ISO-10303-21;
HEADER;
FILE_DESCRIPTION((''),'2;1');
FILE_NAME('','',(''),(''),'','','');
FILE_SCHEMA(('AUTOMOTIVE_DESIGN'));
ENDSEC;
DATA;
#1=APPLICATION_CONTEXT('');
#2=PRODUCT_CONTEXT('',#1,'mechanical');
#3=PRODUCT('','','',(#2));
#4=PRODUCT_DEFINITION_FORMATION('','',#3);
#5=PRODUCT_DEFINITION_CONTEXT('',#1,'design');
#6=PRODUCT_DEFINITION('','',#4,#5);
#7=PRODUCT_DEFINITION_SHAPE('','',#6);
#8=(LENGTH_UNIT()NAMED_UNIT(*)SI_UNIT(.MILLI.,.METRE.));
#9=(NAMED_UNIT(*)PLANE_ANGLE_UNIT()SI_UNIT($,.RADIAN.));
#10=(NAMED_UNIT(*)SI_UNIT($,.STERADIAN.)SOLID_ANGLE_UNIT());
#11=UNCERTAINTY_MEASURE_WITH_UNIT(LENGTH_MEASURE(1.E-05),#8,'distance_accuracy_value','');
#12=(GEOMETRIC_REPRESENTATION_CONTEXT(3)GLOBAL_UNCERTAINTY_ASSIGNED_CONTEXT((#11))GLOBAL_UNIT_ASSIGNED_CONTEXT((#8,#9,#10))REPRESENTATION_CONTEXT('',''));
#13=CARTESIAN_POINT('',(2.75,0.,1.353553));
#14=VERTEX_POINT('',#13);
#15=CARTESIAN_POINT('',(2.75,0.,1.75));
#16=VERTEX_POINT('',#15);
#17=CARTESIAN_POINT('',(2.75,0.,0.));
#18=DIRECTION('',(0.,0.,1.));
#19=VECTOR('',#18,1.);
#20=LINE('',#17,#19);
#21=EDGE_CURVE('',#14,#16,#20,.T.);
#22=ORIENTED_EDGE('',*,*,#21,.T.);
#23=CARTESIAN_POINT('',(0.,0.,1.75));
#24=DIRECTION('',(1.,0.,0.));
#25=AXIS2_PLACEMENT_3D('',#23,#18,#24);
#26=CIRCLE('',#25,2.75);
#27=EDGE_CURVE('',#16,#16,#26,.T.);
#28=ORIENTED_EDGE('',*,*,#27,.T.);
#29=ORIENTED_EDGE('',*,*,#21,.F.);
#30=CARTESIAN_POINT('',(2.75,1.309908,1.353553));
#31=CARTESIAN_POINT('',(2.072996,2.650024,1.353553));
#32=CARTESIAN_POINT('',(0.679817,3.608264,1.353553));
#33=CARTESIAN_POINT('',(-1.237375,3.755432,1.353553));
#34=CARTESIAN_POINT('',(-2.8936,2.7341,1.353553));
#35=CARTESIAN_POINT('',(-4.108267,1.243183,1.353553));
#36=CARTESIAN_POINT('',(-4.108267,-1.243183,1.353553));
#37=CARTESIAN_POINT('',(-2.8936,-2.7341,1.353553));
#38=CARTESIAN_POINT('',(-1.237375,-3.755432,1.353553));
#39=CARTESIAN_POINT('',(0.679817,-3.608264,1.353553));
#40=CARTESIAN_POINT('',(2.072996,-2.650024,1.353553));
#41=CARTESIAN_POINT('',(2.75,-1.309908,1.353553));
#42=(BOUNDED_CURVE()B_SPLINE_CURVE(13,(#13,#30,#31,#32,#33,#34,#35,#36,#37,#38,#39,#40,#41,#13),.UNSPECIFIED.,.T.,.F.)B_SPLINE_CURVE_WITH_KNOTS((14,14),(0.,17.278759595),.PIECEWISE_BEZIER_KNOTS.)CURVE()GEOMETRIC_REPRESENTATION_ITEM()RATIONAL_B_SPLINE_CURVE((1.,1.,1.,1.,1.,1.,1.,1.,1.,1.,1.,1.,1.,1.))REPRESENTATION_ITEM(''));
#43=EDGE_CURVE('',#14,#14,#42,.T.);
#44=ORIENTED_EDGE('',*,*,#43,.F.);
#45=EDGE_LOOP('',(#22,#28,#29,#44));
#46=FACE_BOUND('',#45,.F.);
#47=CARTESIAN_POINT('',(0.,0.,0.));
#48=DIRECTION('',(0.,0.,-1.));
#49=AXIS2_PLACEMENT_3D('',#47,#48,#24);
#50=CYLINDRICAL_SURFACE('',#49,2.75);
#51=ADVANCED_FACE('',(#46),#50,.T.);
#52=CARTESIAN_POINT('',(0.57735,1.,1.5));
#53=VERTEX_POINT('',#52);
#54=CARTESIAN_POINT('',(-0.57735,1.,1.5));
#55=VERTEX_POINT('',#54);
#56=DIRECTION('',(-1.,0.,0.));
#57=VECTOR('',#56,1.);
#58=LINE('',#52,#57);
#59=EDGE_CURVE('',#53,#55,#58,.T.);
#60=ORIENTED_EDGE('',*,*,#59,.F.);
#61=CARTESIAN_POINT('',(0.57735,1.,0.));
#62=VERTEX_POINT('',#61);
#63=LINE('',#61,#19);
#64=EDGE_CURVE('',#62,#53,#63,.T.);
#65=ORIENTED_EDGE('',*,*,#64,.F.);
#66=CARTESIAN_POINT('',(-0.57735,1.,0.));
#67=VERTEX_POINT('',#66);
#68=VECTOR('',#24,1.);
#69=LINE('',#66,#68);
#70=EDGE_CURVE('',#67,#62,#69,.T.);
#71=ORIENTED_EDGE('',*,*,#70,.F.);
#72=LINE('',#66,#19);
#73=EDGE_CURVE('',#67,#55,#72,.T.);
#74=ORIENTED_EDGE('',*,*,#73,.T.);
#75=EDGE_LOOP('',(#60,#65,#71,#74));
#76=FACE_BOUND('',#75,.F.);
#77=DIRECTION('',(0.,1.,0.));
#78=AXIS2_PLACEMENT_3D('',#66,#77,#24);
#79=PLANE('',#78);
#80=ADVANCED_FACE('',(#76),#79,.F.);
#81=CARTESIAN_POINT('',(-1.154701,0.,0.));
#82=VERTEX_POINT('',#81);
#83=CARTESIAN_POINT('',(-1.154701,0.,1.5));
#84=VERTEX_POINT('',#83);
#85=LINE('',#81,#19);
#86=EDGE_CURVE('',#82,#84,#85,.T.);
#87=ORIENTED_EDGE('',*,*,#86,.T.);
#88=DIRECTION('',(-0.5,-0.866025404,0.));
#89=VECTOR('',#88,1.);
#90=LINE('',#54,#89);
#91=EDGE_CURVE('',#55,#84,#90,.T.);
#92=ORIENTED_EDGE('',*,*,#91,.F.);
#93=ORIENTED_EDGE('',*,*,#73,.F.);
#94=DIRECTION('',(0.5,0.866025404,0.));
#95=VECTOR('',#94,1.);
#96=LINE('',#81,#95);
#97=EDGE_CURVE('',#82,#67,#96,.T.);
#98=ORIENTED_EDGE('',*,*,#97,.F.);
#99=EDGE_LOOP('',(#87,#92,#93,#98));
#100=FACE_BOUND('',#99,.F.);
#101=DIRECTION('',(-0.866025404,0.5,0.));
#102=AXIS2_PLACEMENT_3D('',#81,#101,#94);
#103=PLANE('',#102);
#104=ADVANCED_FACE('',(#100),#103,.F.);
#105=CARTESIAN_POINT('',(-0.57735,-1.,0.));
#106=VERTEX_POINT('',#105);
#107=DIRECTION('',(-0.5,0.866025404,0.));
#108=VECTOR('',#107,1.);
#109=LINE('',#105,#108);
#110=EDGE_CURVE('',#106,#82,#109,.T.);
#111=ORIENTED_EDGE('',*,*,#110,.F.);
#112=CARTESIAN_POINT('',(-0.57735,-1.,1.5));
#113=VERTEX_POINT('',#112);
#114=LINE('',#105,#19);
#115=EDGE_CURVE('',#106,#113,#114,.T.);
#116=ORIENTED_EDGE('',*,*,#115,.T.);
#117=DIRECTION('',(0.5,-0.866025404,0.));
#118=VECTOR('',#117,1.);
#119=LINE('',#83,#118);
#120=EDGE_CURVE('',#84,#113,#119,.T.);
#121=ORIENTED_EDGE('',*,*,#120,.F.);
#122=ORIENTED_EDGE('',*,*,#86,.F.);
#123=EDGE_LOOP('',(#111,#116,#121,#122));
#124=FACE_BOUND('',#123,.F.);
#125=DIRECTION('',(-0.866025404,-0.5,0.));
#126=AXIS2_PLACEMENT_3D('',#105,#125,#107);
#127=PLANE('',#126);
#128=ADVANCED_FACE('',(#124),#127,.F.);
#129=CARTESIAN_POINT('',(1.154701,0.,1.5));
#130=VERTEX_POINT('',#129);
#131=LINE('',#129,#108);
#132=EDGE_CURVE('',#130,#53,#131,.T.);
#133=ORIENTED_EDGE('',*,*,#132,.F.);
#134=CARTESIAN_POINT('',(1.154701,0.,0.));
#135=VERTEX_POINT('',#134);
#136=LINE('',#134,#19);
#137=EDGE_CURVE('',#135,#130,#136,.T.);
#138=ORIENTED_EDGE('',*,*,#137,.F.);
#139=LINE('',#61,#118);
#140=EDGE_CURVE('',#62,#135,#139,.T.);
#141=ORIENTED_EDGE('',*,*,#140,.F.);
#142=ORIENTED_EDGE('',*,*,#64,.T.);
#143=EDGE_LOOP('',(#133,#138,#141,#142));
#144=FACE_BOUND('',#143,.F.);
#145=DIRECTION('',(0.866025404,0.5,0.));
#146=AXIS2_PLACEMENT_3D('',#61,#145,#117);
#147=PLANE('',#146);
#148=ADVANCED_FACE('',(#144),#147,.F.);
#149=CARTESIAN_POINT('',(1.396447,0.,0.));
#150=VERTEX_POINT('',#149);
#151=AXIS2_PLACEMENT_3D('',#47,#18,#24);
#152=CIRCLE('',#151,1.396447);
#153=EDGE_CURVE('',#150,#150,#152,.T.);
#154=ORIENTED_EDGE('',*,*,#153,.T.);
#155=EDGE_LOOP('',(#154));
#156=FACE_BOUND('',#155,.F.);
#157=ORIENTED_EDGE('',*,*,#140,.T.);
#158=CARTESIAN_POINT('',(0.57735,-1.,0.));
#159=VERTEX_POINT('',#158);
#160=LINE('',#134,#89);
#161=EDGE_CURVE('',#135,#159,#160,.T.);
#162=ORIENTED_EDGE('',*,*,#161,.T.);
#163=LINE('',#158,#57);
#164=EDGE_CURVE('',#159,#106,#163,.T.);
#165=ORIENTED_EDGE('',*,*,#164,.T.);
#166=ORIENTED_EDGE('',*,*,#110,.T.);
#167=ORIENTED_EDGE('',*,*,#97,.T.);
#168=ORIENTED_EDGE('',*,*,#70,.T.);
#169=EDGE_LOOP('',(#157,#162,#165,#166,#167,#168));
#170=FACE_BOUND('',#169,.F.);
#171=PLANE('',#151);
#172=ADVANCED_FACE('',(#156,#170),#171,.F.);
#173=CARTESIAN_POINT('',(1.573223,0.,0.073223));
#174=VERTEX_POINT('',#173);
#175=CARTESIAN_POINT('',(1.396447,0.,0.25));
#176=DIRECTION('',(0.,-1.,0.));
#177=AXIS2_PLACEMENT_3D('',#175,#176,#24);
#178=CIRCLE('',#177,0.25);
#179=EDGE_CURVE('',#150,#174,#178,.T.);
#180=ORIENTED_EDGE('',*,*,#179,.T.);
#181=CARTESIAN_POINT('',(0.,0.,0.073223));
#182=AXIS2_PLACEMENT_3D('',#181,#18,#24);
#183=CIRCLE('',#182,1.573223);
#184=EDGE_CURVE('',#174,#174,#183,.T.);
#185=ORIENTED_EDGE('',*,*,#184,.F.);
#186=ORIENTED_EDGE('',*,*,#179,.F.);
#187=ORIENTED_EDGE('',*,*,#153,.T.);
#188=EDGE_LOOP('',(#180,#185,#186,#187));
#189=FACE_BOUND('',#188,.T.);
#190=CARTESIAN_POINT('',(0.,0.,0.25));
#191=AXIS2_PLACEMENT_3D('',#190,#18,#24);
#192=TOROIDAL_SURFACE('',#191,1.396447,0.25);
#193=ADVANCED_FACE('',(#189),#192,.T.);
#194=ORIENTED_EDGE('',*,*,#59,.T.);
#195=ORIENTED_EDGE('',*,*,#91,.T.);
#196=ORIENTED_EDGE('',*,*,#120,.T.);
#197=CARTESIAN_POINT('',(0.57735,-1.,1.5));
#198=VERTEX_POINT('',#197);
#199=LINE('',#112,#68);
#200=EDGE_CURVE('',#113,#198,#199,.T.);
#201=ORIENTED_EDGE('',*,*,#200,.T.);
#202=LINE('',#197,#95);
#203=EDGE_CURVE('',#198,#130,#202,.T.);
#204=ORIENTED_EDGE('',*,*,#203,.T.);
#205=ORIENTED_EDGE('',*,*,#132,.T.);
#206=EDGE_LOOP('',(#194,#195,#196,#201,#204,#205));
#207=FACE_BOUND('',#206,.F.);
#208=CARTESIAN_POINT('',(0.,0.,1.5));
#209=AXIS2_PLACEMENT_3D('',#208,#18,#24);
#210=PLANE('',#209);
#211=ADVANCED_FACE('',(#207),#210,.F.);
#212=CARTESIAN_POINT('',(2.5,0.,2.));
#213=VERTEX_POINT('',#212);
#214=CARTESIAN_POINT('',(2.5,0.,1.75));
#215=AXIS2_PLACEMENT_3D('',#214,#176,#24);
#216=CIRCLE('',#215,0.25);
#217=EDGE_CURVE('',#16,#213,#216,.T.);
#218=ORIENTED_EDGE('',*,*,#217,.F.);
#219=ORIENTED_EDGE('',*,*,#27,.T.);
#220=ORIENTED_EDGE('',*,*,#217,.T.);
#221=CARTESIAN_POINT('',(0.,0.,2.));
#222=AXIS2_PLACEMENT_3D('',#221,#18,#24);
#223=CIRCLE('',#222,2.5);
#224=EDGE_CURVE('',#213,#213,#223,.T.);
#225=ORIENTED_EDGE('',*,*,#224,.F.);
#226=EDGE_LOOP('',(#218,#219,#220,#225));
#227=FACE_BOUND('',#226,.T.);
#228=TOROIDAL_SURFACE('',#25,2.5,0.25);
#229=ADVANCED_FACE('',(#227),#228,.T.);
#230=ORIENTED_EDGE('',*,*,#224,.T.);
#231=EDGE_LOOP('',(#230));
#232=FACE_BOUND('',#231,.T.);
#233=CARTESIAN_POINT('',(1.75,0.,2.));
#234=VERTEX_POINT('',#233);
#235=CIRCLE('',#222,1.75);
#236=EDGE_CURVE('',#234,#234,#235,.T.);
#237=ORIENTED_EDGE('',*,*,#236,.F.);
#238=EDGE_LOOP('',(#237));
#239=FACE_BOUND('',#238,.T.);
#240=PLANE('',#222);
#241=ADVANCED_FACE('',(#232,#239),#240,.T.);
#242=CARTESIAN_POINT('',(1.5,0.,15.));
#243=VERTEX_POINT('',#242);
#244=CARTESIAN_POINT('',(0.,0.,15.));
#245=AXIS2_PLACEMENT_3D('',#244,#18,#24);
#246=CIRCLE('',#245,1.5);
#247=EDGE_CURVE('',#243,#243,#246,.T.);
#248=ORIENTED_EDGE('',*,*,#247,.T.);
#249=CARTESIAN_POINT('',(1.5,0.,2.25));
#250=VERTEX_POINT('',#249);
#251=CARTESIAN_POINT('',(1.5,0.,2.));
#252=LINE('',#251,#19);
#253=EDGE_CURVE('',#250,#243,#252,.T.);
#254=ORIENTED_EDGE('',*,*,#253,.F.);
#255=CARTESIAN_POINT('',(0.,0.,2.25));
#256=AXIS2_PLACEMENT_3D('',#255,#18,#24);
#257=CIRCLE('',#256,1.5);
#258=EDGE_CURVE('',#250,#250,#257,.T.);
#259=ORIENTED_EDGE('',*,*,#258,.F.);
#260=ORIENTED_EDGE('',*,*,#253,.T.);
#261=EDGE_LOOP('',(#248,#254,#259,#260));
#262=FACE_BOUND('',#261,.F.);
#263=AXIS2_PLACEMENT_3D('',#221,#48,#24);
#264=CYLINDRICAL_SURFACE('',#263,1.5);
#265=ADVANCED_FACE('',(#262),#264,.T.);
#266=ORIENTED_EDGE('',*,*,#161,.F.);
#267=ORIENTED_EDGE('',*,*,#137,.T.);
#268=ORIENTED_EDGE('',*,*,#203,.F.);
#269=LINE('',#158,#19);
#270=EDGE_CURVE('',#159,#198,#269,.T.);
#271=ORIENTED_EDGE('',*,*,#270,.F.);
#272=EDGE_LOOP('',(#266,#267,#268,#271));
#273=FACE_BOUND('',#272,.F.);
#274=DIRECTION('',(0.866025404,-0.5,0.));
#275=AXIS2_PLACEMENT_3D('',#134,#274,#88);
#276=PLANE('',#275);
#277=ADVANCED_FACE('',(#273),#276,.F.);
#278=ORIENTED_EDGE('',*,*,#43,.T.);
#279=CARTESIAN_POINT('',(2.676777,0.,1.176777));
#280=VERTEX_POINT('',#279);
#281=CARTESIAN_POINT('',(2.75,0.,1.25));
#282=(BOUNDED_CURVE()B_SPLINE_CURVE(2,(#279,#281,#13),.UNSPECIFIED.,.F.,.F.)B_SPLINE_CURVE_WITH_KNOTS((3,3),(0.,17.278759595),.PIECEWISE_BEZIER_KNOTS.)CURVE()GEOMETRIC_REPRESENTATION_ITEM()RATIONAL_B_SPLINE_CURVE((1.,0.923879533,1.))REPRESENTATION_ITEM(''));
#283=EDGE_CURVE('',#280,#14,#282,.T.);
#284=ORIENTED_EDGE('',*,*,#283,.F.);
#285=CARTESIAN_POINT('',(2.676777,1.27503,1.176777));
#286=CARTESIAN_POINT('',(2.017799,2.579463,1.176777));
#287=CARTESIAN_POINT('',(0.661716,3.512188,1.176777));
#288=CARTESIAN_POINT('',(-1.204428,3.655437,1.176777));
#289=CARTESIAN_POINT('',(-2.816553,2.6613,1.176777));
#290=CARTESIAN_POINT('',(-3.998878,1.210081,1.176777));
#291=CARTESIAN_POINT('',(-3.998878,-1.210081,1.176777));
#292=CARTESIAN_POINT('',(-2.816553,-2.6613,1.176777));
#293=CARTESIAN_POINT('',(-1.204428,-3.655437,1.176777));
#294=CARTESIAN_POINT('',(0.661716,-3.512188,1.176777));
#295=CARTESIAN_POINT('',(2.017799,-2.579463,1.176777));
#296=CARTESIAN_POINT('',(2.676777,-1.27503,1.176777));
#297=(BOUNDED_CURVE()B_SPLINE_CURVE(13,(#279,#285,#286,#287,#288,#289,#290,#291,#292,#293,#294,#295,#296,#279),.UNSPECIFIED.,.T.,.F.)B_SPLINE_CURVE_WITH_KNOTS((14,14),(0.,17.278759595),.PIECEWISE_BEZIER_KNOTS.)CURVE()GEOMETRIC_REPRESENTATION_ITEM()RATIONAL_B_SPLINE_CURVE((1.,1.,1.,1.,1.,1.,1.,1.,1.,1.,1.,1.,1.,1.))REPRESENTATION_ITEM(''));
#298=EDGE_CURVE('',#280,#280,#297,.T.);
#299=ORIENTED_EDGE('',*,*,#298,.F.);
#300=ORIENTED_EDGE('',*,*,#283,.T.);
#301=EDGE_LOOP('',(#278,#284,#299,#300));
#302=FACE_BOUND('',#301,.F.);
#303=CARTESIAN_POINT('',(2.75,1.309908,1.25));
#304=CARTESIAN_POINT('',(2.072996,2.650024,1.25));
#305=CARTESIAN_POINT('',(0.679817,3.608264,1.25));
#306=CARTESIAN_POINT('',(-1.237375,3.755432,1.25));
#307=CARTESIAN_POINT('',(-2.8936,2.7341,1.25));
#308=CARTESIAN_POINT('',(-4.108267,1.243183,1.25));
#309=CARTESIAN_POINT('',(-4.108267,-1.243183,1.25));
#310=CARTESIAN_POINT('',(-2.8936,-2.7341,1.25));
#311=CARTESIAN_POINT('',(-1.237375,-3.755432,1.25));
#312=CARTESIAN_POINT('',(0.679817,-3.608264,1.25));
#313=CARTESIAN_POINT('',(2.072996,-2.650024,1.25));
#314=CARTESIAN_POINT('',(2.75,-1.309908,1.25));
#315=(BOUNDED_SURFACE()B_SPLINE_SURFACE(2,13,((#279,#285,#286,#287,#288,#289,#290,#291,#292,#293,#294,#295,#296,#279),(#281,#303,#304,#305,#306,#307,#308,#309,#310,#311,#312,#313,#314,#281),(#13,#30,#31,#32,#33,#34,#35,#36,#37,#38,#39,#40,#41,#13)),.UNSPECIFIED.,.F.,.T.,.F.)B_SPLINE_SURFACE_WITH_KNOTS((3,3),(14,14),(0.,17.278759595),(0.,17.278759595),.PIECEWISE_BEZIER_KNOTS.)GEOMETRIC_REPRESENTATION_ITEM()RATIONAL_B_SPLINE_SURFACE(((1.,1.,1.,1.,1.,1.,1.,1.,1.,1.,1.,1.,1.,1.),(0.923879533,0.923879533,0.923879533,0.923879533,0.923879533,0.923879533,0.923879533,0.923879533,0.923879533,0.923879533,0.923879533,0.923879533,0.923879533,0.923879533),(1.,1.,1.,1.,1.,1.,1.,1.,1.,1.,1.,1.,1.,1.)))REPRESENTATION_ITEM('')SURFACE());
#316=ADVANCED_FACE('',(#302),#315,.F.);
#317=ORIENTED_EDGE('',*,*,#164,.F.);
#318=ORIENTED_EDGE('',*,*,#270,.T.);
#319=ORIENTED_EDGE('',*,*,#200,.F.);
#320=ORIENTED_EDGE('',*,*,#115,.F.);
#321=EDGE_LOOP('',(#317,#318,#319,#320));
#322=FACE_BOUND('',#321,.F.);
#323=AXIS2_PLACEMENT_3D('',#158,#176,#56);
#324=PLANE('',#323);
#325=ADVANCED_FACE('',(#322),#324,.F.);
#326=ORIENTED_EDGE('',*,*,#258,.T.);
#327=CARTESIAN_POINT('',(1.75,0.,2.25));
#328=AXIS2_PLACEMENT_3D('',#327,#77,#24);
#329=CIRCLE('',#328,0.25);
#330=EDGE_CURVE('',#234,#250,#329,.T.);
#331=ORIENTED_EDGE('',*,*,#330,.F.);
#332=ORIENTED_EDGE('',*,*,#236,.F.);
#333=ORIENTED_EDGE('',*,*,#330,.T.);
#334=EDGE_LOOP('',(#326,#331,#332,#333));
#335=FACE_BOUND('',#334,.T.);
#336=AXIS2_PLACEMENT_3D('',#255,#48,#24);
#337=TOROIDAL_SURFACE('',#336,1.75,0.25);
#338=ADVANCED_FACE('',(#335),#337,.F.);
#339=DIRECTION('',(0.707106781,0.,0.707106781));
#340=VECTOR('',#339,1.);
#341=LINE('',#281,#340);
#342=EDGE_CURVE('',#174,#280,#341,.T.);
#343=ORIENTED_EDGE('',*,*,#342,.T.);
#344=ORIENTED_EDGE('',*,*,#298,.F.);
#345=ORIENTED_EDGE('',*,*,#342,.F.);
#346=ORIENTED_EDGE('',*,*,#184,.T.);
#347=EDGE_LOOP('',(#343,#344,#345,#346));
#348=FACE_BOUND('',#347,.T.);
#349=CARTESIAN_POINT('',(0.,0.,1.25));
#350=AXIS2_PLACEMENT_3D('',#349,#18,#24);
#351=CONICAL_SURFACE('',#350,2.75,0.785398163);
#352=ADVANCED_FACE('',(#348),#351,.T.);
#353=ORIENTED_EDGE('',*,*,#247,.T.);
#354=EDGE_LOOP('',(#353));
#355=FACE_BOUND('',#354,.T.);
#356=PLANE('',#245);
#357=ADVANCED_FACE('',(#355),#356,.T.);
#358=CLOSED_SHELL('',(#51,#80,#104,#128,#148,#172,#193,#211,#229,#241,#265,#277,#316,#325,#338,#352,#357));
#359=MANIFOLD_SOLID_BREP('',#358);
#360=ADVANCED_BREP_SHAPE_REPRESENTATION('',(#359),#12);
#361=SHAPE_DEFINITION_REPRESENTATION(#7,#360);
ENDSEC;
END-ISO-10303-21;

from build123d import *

# Parameters (mm, degrees)
F1_R     = 2.75
F1_R_2   = 1.5
F2_DEPTH = 2
F3_START = 1.5
F3_DEPTH = 0.5
F4_START = 2
F4_DEPTH = 13
F5_SIZE2 = 1.25
F5_SIZE  = 1.25
F6_R     = 0.25


# Not quite as in the source:
# - a feature names something its author has since deleted; it is built from what else it names


with BuildPart() as f2:
    # F1 (on Top) → F2 (new body)
    with BuildSketch(Plane.XY):
        Circle(F1_R)
        Circle(F1_R_2, mode=Mode.SUBTRACT)
        Circle(F1_R_2)
        Polygon((-0.5773502692, -1), (-1.1547005384, 0), (-0.5773502692, 1), (0.5773502692, 1), (1.1547005384, 0), (0.5773502692, -1), align=None, mode=Mode.SUBTRACT)
    extrude(amount=F2_DEPTH)

    # F1 (on Top) → F3 (join)
    with BuildSketch(Plane.XY.offset(F3_START)):
        Polygon((-0.5773502692, 1), (-1.1547005384, 0), (-0.5773502692, -1), (0.5773502692, -1), (1.1547005384, 0), (0.5773502692, 1), align=None)
    extrude(amount=F3_DEPTH)

    # F1 (on Top) → F4 (join)
    with BuildSketch(Plane.XY.offset(F4_START)):
        Circle(F1_R_2)
        Polygon((-0.5773502692, -1), (-1.1547005384, 0), (-0.5773502692, 1), (0.5773502692, 1), (1.1547005384, 0), (0.5773502692, -1), align=None, mode=Mode.SUBTRACT)
        Polygon((-0.5773502692, 1), (-1.1547005384, 0), (-0.5773502692, -1), (0.5773502692, -1), (1.1547005384, 0), (0.5773502692, 1), align=None)
    extrude(amount=F4_DEPTH)

    # F5
    f5_edges = [f2.edges().sort_by_distance(p)[0] for p in [
        (-2.75, 0, 0),
    ]]
    chamfer(f5_edges, length=F5_SIZE, length2=F5_SIZE2)

    # F6
    f6_edges = [f2.edges().sort_by_distance(p)[0] for p in [
        (-2.75, 0, 2),
        (-1.5, 0, 2),
        (-1.5, 0, 0),
        (-2.75, 0, 1.25),
    ]]
    fillet(f6_edges, radius=F6_R)


solid = f2.part
